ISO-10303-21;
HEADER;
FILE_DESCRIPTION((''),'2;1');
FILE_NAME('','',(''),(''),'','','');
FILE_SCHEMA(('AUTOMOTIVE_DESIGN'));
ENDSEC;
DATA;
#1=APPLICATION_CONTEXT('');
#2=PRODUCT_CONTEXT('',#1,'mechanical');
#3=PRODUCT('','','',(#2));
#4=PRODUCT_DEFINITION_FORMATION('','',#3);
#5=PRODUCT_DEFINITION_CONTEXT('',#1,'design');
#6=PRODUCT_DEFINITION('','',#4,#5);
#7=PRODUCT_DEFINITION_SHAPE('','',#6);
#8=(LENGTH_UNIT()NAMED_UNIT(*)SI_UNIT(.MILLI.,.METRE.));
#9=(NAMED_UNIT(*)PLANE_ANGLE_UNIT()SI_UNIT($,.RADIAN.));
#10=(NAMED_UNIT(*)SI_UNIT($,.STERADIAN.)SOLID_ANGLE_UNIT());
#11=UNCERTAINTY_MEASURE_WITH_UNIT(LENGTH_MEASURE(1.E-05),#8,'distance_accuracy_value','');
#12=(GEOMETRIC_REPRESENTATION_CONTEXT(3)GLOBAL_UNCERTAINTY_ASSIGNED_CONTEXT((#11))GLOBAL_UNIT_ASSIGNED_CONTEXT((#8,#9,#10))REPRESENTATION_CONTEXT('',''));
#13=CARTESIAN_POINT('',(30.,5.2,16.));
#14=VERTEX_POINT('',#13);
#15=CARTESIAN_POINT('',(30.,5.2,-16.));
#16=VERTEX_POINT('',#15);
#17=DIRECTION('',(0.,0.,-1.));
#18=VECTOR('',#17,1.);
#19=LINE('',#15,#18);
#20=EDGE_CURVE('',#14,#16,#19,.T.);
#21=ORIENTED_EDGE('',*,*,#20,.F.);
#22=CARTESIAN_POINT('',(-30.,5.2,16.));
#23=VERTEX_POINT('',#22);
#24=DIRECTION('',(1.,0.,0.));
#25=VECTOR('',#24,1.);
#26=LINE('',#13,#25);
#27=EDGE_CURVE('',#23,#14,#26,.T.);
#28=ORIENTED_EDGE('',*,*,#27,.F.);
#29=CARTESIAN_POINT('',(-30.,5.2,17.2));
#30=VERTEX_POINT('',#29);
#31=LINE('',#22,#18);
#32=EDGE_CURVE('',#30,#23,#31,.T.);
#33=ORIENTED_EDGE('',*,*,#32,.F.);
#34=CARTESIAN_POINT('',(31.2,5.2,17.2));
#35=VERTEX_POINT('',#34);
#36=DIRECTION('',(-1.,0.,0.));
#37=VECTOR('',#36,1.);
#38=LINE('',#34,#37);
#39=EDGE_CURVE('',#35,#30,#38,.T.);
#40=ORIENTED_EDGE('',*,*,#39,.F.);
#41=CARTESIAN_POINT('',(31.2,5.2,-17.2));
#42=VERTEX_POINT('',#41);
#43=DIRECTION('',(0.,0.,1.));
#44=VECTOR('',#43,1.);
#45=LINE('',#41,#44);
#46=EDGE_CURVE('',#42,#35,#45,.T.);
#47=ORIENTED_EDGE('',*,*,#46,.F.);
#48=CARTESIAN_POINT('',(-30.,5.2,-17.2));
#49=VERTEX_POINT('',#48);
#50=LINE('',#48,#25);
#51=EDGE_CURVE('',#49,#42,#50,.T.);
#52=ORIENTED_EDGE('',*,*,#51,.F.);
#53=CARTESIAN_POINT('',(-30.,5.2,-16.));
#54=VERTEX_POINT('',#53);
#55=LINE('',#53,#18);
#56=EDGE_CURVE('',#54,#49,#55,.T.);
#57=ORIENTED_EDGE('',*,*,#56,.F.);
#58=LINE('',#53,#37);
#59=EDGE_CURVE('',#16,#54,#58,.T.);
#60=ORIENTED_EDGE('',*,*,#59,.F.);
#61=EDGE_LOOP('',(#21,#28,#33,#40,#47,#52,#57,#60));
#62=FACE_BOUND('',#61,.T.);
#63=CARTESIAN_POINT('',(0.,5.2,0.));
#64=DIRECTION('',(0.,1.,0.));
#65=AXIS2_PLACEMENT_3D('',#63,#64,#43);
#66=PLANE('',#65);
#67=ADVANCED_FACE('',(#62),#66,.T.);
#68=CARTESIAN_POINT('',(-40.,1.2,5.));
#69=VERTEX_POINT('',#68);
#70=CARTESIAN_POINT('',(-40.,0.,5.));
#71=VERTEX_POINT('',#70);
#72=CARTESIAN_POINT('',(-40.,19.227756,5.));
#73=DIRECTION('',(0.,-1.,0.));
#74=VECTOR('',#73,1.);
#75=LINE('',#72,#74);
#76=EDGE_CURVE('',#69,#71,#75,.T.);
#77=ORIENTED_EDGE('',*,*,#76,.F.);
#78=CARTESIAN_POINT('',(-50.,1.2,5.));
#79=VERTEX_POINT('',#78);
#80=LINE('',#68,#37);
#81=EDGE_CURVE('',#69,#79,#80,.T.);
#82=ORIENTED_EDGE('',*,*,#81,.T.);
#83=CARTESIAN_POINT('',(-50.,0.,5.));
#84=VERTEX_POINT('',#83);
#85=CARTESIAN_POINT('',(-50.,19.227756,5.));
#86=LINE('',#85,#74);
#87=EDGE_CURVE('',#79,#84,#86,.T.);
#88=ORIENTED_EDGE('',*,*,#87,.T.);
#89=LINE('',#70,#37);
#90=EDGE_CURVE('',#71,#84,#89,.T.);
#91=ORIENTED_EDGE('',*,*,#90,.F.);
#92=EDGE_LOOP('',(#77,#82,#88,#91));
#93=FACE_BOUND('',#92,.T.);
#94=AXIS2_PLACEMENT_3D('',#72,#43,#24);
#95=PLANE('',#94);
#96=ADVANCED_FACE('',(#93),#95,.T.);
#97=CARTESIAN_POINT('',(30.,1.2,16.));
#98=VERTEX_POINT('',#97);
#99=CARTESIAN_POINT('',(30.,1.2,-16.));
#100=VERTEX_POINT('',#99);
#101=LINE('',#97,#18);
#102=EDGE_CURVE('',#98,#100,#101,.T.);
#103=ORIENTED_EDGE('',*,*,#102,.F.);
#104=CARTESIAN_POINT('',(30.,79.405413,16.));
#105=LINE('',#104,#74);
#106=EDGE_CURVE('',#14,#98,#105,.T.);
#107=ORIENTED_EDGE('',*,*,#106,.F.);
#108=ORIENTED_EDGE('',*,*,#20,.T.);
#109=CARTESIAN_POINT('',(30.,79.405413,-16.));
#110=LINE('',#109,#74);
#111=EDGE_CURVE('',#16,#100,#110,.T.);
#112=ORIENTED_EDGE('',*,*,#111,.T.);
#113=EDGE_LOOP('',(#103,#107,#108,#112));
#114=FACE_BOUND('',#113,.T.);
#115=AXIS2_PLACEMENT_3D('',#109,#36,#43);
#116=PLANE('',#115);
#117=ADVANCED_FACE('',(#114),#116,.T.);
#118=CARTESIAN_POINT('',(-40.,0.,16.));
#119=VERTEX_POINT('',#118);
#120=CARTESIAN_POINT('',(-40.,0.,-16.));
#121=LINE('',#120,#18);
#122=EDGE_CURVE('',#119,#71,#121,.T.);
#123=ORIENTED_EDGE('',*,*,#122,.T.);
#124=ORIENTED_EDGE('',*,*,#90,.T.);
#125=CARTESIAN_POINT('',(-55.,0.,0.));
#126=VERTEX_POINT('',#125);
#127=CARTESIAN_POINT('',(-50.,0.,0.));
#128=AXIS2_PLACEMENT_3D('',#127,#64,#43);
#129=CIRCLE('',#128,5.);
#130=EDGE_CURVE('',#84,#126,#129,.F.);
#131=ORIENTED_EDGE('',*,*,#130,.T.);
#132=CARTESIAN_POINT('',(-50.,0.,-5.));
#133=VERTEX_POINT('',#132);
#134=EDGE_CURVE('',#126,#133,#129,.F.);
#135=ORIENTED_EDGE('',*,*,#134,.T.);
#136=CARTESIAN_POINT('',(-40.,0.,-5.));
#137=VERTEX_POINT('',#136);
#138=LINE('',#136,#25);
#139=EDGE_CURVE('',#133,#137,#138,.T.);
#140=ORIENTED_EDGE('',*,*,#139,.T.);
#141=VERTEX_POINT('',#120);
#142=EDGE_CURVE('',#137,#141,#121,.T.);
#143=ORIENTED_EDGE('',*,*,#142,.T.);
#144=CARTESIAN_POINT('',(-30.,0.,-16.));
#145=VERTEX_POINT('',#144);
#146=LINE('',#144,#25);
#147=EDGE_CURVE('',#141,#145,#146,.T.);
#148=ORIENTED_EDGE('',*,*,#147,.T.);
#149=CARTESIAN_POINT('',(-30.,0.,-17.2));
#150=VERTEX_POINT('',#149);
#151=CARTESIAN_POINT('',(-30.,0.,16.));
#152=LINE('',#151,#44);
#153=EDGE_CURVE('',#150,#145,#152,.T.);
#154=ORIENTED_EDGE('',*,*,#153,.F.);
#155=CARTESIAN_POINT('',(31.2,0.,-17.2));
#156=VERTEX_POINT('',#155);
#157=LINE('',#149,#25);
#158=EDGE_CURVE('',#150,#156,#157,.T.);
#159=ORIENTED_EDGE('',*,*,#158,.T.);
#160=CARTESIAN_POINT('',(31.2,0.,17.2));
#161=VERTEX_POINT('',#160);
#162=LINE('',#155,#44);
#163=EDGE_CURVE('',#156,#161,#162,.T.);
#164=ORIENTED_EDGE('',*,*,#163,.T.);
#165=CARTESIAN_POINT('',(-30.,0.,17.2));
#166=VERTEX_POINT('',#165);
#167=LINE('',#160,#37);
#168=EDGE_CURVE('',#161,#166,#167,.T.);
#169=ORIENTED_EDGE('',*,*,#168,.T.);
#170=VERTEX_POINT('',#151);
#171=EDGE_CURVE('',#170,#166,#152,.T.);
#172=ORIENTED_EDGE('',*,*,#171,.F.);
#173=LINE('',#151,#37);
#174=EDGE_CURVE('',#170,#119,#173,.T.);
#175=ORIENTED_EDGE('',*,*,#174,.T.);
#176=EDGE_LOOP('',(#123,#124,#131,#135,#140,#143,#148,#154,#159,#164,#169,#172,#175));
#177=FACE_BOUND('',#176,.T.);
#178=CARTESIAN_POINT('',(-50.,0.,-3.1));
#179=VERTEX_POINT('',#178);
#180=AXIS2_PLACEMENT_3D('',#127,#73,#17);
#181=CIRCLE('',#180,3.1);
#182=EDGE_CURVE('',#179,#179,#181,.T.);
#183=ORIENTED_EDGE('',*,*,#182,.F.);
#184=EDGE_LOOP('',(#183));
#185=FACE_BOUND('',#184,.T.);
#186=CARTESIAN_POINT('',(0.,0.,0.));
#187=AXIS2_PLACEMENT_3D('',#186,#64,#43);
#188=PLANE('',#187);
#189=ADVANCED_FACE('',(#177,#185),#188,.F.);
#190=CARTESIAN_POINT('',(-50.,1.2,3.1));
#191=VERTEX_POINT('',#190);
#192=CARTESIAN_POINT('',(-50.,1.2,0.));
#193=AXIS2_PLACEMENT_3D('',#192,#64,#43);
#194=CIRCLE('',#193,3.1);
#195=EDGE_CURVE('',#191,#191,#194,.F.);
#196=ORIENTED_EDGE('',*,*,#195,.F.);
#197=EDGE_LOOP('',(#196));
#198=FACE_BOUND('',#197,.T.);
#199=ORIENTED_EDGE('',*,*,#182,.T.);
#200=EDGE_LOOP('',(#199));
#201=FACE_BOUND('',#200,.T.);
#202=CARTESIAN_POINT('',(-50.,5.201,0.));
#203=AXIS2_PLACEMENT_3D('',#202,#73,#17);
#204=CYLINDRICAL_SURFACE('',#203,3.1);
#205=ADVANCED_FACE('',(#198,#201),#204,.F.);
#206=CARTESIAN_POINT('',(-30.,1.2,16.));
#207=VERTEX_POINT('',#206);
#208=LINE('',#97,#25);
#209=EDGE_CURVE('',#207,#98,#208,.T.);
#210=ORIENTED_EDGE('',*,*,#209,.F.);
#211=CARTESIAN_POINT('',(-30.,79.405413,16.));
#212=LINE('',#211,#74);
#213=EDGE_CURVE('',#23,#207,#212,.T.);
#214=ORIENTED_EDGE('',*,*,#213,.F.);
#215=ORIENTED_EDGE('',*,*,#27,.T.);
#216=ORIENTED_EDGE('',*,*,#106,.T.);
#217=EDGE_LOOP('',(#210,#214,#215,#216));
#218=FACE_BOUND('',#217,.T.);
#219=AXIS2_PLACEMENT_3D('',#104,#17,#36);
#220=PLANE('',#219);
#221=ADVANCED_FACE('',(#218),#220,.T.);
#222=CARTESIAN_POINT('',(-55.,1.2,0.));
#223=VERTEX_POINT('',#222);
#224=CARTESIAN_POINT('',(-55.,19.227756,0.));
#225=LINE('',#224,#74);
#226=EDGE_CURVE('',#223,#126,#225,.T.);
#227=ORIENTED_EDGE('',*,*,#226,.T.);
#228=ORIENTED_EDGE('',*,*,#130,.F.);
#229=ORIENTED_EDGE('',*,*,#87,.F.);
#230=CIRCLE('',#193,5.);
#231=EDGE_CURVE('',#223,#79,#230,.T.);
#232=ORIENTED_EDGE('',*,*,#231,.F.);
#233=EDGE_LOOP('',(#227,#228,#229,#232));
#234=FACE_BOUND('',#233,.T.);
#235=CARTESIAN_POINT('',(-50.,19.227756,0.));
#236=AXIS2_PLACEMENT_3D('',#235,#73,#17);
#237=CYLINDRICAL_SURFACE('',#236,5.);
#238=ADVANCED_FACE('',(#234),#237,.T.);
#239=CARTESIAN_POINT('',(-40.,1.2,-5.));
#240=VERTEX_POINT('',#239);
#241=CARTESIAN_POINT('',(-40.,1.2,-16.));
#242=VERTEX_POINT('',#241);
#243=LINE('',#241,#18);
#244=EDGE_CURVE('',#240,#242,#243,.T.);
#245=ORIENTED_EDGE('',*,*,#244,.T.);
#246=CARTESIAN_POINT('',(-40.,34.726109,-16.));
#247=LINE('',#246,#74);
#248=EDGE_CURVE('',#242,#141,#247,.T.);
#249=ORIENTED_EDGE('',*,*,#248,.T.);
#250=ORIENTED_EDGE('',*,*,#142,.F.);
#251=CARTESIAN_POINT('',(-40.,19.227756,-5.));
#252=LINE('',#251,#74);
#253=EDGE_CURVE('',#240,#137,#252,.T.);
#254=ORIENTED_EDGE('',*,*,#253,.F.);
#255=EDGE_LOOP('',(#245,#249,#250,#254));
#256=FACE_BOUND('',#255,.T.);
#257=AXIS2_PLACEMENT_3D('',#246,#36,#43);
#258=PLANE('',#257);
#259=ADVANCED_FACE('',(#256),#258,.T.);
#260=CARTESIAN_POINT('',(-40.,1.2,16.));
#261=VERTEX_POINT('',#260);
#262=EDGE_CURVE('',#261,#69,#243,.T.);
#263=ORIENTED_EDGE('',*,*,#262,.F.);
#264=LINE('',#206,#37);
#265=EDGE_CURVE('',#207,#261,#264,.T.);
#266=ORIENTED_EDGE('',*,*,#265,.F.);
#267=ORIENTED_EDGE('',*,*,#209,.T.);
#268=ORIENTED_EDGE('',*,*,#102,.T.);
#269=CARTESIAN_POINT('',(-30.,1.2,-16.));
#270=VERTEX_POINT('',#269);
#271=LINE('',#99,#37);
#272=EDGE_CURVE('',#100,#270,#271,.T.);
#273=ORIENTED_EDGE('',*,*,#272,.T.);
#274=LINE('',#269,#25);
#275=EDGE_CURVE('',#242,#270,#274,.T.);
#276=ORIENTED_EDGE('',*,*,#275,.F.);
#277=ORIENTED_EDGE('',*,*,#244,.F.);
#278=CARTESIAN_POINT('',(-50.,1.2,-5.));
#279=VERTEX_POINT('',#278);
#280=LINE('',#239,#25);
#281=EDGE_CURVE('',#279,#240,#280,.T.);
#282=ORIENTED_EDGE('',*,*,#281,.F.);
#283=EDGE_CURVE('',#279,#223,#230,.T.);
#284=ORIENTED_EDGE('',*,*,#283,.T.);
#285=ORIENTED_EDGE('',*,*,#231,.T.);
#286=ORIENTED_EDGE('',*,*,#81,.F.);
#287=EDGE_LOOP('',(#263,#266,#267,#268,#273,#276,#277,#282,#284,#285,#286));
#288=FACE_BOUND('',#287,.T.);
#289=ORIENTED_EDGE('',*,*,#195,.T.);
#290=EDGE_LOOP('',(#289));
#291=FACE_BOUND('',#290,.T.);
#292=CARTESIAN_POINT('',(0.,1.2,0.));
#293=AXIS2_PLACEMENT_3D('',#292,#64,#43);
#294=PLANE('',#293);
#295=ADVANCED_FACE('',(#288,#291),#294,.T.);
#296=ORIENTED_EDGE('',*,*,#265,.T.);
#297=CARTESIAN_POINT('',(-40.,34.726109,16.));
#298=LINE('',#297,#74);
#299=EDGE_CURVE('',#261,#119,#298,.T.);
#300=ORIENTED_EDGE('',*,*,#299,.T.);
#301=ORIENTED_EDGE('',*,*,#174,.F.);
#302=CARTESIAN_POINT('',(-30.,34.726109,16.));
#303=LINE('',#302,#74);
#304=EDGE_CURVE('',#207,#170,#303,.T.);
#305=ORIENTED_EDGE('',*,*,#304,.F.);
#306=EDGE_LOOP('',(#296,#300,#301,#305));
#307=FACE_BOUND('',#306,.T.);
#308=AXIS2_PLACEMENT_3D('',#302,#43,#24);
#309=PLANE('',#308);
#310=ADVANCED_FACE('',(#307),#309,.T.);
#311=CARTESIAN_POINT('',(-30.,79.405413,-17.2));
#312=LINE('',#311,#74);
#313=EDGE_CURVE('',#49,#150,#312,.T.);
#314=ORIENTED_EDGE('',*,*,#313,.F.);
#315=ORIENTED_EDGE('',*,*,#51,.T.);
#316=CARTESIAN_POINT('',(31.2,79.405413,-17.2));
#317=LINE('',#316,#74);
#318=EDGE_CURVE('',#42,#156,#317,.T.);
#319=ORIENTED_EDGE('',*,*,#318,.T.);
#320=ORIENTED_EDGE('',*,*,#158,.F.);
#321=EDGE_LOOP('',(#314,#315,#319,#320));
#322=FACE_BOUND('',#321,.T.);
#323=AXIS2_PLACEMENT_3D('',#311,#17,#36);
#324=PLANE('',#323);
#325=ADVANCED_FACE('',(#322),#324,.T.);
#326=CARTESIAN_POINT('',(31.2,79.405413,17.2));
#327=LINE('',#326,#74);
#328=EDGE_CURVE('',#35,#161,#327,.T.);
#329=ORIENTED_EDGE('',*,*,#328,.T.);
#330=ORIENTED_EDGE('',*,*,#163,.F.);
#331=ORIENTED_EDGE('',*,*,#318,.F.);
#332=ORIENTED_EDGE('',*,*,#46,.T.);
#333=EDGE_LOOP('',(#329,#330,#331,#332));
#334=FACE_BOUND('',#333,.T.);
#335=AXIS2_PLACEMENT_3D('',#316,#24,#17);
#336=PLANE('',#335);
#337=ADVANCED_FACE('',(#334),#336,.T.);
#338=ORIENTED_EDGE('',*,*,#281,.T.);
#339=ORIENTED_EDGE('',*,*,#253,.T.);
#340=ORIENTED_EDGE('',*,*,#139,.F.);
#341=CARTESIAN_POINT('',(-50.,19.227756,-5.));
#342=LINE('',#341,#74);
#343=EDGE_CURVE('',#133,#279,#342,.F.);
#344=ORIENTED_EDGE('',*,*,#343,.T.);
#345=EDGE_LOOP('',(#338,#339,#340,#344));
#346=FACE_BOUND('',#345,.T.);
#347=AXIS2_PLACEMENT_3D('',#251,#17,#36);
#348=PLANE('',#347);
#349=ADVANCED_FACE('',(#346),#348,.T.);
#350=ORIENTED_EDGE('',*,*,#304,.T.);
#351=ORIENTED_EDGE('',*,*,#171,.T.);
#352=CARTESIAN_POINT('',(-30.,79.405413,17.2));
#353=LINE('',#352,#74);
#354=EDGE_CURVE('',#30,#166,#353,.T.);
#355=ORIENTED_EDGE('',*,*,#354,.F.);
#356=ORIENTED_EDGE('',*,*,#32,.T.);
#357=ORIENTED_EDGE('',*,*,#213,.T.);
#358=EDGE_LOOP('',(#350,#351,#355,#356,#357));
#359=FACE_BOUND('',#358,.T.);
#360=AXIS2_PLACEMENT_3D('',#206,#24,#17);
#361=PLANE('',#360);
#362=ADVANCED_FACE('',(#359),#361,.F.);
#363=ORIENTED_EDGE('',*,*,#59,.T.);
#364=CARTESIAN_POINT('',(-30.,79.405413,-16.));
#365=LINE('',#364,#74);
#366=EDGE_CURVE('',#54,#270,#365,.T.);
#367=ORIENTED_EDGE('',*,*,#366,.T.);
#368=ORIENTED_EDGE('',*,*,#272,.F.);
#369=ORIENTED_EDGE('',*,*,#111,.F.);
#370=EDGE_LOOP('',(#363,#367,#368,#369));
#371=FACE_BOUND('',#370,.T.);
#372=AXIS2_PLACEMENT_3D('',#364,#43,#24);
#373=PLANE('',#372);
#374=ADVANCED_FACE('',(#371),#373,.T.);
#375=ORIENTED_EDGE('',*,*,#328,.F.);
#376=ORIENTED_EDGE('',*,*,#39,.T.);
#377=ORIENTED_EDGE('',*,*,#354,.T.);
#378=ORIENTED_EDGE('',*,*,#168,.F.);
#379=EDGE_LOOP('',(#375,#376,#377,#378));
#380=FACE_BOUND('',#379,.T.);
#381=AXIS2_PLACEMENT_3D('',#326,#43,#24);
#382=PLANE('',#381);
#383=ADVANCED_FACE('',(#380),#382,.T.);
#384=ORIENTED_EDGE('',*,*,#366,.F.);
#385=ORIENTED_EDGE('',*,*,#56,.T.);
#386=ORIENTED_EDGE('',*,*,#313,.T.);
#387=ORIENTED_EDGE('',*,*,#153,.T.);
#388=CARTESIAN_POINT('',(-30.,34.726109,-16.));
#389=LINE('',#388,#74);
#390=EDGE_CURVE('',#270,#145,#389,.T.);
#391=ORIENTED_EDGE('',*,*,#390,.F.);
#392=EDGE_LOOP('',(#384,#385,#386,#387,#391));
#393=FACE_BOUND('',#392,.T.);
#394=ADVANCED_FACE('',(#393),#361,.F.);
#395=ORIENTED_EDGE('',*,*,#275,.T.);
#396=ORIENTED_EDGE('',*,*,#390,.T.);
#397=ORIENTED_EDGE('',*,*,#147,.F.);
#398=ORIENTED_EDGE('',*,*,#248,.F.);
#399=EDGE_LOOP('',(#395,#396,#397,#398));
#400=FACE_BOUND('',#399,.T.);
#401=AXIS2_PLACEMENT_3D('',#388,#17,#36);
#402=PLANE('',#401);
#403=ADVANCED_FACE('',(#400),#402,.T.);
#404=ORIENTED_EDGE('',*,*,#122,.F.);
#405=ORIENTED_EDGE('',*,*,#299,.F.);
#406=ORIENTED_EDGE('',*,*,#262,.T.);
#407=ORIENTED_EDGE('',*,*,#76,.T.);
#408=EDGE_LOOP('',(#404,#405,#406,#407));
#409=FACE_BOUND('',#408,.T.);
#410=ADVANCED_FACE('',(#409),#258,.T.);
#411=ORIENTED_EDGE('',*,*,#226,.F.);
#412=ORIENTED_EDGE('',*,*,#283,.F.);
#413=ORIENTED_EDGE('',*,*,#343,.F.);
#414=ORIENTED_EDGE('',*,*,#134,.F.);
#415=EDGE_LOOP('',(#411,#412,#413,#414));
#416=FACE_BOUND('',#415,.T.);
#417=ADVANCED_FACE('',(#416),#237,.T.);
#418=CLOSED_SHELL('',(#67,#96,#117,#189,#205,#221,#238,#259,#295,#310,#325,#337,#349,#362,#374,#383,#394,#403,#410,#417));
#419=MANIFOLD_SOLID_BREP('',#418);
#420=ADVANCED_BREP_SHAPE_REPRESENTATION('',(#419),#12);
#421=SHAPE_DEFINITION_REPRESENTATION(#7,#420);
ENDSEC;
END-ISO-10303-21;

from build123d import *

# Parameters (mm, degrees)
SKETCH1_W           = 60
SKETCH1_H           = 32
BOSS_EXTRUDE1_DEPTH = 1.2
BOSS_EXTRUDE2_DEPTH = 5.2
SKETCH3_W           = 10
SKETCH3_H           = 32
BOSS_EXTRUDE3_DEPTH = 1.2
SKETCH4_W           = 15
SKETCH4_H           = 10
BOSS_EXTRUDE4_DEPTH = 1.2
FILLET1_R           = 5
CUT_EXTRUDE1_REACH  = 59.861
SKETCH5_R           = 3.1


with BuildPart() as part:
    # Sketch1 → Boss-Extrude1 (new body)
    with BuildSketch(Plane(origin=(0, 0, 0), x_dir=(1, 0, 0), z_dir=(0, 1, 0))):
        Rectangle(SKETCH1_W, SKETCH1_H)
    extrude(amount=BOSS_EXTRUDE1_DEPTH)

    # Sketch2 → Boss-Extrude2 (add)
    with BuildSketch(Plane.XZ):
        Polygon((-30, -17.2), (31.2, -17.2), (31.2, 17.2), (-30, 17.2), (-30, 16), (30, 16), (30, -16), (-30, -16), align=None)
    extrude(amount=-BOSS_EXTRUDE2_DEPTH)

    # Sketch3 → Boss-Extrude3 (add)
    with BuildSketch(Plane.XZ):
        with Locations((-35, 0)):
            Rectangle(SKETCH3_W, SKETCH3_H)
    extrude(amount=-BOSS_EXTRUDE3_DEPTH)

    # Sketch4 → Boss-Extrude4 (add)
    with BuildSketch(Plane.XZ):
        with Locations((-47.5, 0)):
            Rectangle(SKETCH4_W, SKETCH4_H)
    extrude(amount=-BOSS_EXTRUDE4_DEPTH)

    # Fillet1
    fillet1_edges = [part.edges().sort_by_distance(p)[0] for p in [
        (-55, 0.6, 5),
        (-55, 0.6, -5),
    ]]
    fillet(fillet1_edges, radius=FILLET1_R - 0.0001)  # a hair under: the kernel refuses the full size

    # Sketch5 → Cut-Extrude1 (cut, up to next)
    with BuildSketch(Plane.XZ, mode=Mode.PRIVATE) as cut_extrude1_sk1:
        with Locations(Location((-50, 0, 0), (0, 0, 270))):
            Circle(SKETCH5_R)
    cut_extrude1_tool1 = extrude(cut_extrude1_sk1.sketch, amount=-CUT_EXTRUDE1_REACH, mode=Mode.PRIVATE) & part.part
    add(cut_extrude1_tool1.solids().sort_by_distance((-50, 0, 0))[0], mode=Mode.SUBTRACT)


solid = part.part
